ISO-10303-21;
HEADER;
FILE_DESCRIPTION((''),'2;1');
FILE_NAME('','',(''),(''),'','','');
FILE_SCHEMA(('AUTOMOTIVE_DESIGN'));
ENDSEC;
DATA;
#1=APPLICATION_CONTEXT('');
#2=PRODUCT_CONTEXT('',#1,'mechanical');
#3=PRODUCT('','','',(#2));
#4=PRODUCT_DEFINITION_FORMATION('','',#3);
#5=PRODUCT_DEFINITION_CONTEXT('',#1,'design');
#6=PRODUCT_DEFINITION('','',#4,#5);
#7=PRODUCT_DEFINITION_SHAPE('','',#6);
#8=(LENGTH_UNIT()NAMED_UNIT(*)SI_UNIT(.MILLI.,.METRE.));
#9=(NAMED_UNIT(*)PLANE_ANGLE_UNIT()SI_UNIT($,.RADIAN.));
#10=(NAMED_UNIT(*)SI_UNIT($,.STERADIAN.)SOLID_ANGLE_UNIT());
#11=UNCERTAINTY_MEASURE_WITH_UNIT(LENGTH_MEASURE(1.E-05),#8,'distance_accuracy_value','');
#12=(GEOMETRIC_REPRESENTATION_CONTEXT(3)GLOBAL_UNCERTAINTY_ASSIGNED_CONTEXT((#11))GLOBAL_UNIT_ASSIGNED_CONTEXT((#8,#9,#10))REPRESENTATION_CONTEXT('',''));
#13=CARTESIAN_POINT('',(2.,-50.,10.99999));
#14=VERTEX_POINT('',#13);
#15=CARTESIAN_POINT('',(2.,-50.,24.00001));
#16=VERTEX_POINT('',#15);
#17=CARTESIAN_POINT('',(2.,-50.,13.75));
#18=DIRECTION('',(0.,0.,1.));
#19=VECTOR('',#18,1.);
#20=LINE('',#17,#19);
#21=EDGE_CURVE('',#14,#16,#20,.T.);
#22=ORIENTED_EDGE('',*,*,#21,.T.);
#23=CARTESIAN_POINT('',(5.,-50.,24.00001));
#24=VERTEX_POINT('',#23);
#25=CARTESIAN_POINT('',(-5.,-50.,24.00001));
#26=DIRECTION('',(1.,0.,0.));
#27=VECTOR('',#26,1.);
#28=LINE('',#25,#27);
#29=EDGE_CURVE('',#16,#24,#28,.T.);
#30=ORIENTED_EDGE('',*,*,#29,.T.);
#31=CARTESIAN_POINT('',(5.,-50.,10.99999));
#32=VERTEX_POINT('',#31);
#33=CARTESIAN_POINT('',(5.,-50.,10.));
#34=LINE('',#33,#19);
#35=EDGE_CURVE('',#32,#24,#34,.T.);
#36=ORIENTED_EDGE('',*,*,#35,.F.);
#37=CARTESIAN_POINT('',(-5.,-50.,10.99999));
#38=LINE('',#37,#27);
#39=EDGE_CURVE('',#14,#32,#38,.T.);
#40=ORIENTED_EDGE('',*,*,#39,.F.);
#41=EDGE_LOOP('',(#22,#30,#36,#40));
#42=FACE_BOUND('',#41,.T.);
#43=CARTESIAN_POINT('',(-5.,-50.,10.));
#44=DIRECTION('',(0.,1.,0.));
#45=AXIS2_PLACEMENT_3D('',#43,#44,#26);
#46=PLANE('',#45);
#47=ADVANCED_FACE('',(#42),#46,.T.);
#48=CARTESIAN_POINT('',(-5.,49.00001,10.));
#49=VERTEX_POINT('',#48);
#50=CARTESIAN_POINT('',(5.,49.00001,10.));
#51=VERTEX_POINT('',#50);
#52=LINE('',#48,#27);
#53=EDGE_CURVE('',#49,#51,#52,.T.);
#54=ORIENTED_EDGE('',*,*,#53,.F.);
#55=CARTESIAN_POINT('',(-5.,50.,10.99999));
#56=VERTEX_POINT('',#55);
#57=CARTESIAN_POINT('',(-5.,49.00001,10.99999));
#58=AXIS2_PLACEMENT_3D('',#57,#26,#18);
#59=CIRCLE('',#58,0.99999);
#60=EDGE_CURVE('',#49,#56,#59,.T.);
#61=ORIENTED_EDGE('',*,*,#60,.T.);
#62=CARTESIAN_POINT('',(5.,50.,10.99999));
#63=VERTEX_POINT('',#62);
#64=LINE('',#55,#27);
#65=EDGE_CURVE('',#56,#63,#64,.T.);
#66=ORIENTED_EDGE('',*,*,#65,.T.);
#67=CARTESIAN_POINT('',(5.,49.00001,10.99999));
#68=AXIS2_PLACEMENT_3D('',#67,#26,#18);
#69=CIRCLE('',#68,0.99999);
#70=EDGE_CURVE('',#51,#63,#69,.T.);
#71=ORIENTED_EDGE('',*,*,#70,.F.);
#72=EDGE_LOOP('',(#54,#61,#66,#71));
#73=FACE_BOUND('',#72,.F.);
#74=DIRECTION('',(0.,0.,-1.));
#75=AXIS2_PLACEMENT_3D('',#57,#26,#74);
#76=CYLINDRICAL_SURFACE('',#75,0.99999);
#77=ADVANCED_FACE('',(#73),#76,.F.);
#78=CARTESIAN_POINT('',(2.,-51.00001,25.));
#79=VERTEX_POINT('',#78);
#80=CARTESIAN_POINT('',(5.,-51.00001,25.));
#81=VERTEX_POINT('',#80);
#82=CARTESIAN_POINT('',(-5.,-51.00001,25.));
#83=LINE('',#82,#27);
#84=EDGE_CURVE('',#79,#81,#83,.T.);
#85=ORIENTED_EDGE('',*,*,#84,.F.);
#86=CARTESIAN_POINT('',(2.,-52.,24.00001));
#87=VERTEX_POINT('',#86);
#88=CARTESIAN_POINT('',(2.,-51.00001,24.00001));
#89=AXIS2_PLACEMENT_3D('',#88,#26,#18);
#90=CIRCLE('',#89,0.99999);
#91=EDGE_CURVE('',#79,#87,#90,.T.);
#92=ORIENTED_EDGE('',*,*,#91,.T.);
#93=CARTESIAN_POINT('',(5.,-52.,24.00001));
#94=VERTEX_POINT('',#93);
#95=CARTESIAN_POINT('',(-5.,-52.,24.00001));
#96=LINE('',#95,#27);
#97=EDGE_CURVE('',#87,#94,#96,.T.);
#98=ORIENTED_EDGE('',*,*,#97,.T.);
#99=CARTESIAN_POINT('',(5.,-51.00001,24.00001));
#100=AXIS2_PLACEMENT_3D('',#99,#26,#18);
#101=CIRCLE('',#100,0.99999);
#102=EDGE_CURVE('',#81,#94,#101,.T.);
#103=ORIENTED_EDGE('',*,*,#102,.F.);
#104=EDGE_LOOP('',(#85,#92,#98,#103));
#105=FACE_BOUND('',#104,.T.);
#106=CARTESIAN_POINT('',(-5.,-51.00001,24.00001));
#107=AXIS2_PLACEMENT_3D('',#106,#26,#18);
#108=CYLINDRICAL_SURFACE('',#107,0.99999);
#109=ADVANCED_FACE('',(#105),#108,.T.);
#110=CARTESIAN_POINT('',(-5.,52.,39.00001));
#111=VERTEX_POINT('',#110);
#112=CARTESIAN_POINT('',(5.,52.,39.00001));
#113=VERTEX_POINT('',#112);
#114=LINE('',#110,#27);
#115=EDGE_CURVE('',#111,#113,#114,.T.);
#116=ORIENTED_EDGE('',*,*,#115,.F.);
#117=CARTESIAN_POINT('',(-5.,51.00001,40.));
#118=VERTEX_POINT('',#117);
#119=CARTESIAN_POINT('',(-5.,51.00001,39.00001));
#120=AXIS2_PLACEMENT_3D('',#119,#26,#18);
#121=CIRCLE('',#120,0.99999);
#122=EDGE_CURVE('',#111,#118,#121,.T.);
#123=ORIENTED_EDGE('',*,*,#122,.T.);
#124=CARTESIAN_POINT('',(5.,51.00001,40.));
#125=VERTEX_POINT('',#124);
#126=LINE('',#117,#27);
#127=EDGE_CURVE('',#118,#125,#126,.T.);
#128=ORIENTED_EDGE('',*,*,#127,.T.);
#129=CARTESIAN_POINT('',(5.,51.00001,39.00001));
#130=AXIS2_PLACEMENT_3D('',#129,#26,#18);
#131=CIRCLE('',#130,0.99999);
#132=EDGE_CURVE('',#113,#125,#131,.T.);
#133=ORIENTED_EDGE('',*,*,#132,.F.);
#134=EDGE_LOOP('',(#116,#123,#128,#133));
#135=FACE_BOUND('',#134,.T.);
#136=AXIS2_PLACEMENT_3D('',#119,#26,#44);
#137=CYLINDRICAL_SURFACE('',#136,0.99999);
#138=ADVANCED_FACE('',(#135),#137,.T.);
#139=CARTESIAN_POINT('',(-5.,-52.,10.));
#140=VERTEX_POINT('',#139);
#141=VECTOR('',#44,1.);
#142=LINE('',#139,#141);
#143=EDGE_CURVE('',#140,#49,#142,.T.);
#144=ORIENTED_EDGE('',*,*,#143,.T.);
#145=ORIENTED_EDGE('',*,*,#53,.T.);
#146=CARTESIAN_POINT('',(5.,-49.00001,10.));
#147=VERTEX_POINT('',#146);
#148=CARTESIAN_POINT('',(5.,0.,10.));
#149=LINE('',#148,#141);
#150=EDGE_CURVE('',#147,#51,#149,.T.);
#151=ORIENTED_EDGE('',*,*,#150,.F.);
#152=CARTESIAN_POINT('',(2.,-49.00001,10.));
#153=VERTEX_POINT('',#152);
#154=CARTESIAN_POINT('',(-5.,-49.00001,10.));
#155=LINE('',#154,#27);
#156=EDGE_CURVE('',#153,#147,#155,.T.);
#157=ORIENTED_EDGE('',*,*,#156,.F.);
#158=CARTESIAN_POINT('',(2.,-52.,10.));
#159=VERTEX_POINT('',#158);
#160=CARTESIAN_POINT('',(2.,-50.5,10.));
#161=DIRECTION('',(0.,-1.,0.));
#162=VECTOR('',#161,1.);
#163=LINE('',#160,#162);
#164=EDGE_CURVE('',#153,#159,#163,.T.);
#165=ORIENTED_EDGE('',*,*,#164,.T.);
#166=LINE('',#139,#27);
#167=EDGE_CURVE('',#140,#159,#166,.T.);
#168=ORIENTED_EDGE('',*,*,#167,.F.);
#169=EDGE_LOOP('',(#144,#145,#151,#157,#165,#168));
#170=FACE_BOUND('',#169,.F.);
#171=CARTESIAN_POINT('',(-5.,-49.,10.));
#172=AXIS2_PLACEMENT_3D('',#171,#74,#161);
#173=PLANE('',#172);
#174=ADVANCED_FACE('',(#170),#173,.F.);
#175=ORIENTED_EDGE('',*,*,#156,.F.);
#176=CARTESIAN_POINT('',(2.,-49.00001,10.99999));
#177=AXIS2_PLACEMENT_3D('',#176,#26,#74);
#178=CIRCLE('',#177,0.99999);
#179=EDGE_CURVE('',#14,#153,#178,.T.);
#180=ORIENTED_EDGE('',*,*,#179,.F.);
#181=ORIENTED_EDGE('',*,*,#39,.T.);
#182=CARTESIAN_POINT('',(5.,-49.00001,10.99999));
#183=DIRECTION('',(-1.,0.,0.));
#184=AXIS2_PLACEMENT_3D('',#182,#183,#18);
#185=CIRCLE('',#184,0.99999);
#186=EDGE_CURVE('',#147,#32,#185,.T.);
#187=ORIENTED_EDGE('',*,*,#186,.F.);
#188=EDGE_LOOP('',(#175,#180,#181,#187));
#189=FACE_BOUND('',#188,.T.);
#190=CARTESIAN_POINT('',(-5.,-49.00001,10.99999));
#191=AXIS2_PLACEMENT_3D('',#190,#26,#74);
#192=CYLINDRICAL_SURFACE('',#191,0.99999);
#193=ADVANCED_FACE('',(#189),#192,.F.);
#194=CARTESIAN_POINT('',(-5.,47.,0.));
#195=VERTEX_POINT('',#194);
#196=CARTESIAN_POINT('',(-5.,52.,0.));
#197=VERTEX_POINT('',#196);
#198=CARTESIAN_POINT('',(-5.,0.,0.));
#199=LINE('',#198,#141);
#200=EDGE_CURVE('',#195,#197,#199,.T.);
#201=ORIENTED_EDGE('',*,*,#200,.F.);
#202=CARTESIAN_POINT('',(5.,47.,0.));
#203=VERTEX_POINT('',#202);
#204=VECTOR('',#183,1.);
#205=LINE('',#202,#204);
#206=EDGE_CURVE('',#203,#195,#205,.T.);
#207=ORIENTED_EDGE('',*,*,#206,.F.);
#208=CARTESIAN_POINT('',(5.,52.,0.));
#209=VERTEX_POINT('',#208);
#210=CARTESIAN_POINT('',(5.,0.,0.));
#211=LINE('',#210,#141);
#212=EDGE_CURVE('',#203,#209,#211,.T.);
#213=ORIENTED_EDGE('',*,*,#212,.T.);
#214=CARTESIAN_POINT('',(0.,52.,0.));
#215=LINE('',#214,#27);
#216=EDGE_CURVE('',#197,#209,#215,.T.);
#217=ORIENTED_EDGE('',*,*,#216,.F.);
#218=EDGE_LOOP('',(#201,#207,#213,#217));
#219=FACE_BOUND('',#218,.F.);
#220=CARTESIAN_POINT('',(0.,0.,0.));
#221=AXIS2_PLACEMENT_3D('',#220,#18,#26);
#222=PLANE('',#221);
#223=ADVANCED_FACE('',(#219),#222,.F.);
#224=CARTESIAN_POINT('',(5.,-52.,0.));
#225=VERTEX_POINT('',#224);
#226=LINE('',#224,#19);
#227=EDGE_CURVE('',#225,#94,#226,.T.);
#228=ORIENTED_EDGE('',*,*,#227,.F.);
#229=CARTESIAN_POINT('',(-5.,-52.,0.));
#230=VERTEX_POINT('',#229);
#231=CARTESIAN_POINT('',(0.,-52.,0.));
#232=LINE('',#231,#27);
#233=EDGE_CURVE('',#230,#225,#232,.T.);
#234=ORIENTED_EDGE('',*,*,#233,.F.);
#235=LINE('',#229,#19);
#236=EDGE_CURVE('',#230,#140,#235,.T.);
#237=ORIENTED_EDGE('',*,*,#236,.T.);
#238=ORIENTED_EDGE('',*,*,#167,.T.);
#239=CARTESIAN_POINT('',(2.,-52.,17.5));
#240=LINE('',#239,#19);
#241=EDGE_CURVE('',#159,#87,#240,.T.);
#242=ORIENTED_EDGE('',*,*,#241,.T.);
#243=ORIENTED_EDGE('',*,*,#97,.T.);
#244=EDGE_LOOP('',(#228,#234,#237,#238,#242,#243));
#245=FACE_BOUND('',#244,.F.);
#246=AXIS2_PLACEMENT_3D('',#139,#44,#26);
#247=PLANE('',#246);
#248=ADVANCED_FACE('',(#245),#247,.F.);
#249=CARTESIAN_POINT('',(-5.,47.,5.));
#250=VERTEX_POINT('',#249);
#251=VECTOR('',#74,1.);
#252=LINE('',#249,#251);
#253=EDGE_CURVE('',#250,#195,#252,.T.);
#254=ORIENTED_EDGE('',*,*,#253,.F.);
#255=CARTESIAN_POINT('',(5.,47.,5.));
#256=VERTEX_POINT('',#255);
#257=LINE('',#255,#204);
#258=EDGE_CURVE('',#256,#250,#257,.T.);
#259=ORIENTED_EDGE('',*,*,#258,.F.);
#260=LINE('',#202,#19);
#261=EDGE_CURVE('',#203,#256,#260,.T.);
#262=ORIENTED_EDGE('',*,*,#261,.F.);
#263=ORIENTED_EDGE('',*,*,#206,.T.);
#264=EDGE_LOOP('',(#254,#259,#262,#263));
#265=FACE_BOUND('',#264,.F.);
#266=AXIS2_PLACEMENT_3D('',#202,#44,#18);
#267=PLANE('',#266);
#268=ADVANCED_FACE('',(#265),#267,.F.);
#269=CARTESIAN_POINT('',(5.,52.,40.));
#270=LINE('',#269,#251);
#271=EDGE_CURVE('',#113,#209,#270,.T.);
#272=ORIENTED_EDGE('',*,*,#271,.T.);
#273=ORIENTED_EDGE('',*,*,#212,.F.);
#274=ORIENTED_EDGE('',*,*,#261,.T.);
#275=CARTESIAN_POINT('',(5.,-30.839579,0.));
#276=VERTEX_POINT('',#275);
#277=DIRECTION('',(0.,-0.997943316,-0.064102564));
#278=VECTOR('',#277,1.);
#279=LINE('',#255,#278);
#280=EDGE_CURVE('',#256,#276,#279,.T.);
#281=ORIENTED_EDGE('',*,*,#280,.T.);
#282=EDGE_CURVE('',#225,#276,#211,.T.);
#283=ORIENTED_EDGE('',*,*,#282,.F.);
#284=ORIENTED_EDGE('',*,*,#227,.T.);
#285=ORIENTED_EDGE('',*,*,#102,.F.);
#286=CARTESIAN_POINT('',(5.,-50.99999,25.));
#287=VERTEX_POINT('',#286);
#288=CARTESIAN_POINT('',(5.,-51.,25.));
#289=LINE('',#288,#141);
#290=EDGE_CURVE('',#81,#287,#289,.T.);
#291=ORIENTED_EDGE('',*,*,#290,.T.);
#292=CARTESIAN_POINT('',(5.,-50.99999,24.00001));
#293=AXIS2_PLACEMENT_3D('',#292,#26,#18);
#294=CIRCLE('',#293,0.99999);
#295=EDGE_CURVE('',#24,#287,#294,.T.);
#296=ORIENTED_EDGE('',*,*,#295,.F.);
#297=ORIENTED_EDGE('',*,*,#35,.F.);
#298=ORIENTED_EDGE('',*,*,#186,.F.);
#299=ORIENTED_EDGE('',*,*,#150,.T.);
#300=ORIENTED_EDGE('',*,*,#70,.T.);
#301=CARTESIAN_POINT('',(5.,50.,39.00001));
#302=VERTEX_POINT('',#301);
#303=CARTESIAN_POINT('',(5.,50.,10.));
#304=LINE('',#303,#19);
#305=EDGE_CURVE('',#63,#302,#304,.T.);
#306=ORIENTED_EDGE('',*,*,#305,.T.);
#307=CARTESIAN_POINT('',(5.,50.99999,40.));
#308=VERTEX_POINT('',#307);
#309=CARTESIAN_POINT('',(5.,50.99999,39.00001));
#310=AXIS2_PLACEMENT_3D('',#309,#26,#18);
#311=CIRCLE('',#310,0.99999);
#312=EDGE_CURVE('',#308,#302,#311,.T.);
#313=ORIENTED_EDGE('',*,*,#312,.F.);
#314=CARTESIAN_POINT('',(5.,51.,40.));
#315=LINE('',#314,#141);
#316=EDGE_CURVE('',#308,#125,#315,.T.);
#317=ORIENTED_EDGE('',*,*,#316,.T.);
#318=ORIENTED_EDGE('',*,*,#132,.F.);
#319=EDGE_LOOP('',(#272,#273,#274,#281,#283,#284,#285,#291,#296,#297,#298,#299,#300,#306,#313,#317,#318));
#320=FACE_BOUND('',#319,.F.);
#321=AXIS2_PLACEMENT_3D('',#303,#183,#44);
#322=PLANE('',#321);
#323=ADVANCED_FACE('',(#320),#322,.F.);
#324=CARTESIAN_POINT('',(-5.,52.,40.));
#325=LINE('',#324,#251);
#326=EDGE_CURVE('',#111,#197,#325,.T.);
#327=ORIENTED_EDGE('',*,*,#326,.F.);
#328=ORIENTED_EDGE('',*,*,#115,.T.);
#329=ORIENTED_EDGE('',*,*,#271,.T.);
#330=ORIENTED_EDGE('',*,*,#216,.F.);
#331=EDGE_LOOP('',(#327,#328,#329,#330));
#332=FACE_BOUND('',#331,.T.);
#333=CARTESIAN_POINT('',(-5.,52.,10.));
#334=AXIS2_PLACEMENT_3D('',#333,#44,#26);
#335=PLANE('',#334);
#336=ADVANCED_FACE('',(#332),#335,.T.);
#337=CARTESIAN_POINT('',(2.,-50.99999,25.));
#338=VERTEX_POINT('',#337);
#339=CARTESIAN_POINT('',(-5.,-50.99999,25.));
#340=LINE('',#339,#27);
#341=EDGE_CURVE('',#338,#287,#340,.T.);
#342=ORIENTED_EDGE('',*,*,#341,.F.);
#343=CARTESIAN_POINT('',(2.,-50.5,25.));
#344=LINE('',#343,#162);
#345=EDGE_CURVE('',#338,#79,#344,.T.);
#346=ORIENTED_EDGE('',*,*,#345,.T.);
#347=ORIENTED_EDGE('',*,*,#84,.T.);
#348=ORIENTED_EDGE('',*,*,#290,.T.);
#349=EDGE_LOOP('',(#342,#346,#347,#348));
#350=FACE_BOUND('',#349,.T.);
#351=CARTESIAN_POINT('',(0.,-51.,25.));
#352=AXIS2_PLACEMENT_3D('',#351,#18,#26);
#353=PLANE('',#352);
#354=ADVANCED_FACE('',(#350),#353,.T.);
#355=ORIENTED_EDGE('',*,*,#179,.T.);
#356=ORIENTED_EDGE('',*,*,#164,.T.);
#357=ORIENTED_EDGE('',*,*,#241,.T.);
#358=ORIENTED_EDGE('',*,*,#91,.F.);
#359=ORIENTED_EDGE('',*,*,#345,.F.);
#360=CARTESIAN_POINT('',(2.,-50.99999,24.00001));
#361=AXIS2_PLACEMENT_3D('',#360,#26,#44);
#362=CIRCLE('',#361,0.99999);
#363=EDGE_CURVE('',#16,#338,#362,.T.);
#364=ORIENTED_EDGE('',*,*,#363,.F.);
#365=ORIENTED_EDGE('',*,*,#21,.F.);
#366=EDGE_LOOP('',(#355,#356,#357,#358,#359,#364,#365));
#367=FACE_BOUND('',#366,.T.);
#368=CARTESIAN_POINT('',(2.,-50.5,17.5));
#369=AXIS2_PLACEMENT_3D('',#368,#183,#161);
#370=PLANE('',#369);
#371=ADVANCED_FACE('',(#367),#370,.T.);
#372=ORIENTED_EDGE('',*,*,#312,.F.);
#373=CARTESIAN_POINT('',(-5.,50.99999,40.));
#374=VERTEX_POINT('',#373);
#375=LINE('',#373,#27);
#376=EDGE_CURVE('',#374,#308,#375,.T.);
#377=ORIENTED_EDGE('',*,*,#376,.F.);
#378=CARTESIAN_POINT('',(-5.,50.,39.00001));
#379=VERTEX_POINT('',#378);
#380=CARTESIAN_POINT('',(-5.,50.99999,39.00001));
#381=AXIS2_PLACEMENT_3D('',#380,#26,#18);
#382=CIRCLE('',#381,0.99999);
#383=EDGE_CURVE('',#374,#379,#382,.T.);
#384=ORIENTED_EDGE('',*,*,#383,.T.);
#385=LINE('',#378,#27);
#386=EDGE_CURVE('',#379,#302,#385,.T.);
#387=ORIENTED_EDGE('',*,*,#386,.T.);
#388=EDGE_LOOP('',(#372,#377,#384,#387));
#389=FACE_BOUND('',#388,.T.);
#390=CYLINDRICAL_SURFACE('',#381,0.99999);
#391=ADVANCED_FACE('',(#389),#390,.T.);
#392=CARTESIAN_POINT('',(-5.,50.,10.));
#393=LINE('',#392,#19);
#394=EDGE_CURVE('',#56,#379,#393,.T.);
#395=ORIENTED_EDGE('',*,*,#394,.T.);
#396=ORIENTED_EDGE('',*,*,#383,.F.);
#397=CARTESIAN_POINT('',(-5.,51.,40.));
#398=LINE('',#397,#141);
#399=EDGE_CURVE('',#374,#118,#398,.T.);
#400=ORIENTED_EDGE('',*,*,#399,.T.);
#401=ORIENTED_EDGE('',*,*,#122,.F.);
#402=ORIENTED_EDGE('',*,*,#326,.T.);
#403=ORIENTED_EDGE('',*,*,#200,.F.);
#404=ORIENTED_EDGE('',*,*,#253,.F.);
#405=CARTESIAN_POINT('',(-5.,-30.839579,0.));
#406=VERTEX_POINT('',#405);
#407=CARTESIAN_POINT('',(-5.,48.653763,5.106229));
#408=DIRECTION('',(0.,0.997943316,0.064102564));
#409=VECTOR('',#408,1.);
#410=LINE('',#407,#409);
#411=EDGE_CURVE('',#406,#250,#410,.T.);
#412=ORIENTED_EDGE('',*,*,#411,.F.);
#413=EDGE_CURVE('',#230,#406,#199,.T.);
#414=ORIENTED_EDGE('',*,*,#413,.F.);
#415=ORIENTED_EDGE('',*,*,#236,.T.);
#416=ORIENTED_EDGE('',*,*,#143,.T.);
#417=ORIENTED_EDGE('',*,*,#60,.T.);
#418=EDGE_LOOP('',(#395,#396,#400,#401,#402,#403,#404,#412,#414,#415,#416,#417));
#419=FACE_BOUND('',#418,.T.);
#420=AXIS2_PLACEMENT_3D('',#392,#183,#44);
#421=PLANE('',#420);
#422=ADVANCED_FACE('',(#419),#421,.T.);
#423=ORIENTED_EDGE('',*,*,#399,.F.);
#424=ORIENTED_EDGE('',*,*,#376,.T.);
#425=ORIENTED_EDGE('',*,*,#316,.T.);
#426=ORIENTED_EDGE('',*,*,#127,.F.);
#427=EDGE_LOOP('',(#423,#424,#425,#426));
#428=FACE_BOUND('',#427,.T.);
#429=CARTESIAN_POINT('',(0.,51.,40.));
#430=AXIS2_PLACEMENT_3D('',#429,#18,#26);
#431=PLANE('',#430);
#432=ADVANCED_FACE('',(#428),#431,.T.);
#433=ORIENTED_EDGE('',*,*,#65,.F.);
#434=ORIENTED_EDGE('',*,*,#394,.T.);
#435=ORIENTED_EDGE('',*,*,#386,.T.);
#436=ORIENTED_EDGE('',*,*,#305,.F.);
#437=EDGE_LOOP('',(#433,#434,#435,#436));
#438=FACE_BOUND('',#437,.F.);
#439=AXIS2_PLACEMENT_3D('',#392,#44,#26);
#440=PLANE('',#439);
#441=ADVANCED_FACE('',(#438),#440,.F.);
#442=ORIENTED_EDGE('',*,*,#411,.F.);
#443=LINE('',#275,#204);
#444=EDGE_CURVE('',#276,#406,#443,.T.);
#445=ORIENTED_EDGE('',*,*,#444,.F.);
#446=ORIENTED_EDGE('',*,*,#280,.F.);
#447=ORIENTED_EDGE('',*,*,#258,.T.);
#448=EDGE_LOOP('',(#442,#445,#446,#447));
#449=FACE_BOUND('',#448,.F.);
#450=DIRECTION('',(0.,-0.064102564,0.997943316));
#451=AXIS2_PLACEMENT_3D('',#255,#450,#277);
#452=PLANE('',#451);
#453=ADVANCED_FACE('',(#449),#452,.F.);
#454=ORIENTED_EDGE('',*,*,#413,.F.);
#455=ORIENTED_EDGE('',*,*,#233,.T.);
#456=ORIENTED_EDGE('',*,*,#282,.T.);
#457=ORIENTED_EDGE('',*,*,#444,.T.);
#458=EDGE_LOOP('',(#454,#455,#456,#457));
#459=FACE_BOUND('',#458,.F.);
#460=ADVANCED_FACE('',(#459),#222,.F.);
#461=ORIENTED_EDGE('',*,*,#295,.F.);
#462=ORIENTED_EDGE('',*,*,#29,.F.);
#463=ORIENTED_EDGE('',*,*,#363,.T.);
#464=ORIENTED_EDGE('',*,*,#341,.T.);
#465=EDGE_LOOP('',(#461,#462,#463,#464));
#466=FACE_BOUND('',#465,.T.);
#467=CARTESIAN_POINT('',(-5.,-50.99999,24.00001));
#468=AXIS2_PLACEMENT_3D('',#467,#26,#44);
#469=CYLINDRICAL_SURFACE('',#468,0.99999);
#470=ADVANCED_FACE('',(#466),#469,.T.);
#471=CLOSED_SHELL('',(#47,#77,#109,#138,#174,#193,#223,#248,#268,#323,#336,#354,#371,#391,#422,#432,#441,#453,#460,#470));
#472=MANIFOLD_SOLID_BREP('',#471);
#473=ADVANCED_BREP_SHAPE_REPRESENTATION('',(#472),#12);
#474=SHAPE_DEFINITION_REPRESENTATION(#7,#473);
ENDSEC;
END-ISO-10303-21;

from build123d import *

# Parameters (mm, degrees)
F0_W      = 10
F0_H      = 104
F1_DEPTH  = 10
F2_W      = 10
F2_H      = 2
F3_DEPTH  = 15
F4_W      = 10
F4_H      = 2
F5_DEPTH  = 30
F7_DEPTH  = 10.001
F8_R      = 0.99999
F9_W      = 3
F9_H      = 15
F10_DEPTH = 7


# Not quite as in the source:
# - a fillet or chamfer is up to 0.001 mm smaller than in the source, because OpenCascade refuses the exact size


with BuildPart() as f1:
    # F0 (on Top) → F1 (new body)
    with BuildSketch(Plane.XY):
        Rectangle(F0_W, F0_H)
    extrude(amount=F1_DEPTH)

    # F2 (on face) → F3 (join)
    with BuildSketch(Plane.XY.offset(10)):
        with Locations((0, -51)):
            Rectangle(F2_W, F2_H)
    extrude(amount=F3_DEPTH)

    # F4 (on face) → F5 (join)
    with BuildSketch(Plane.XY.offset(10)):
        with Locations((0, 51)):
            Rectangle(F4_W, F4_H)
    extrude(amount=F5_DEPTH)

    # F6 (on face) → F7 (cut, through all)
    with BuildSketch(Plane.YZ.offset(5)):
        Polygon((47, 5), (-30.8395786217, 0), (47, 0), align=None)
    extrude(amount=-F7_DEPTH, mode=Mode.SUBTRACT)

    # F8 (radius 1 in the source; OpenCascade refuses exactly that, so slightly less here)
    f8_edges = [f1.edges().sort_by_distance(p)[0] for p in [
        (0, 50, 40),
        (0, 52, 40),
        (0, -52, 25),
        (0, -50, 25),
        (0, 50, 10),
        (0, -50, 10),
    ]]
    fillet(f8_edges, radius=F8_R)

    # F9 (on face) → F10 (cut)
    with BuildSketch(Plane(origin=(-5, 0, 0), x_dir=(0, -1, 0), z_dir=(-1, 0, 0))):
        with Locations((50.5, 17.5)):
            Rectangle(F9_W, F9_H)
    extrude(amount=-F10_DEPTH, mode=Mode.SUBTRACT)


solid = f1.part
